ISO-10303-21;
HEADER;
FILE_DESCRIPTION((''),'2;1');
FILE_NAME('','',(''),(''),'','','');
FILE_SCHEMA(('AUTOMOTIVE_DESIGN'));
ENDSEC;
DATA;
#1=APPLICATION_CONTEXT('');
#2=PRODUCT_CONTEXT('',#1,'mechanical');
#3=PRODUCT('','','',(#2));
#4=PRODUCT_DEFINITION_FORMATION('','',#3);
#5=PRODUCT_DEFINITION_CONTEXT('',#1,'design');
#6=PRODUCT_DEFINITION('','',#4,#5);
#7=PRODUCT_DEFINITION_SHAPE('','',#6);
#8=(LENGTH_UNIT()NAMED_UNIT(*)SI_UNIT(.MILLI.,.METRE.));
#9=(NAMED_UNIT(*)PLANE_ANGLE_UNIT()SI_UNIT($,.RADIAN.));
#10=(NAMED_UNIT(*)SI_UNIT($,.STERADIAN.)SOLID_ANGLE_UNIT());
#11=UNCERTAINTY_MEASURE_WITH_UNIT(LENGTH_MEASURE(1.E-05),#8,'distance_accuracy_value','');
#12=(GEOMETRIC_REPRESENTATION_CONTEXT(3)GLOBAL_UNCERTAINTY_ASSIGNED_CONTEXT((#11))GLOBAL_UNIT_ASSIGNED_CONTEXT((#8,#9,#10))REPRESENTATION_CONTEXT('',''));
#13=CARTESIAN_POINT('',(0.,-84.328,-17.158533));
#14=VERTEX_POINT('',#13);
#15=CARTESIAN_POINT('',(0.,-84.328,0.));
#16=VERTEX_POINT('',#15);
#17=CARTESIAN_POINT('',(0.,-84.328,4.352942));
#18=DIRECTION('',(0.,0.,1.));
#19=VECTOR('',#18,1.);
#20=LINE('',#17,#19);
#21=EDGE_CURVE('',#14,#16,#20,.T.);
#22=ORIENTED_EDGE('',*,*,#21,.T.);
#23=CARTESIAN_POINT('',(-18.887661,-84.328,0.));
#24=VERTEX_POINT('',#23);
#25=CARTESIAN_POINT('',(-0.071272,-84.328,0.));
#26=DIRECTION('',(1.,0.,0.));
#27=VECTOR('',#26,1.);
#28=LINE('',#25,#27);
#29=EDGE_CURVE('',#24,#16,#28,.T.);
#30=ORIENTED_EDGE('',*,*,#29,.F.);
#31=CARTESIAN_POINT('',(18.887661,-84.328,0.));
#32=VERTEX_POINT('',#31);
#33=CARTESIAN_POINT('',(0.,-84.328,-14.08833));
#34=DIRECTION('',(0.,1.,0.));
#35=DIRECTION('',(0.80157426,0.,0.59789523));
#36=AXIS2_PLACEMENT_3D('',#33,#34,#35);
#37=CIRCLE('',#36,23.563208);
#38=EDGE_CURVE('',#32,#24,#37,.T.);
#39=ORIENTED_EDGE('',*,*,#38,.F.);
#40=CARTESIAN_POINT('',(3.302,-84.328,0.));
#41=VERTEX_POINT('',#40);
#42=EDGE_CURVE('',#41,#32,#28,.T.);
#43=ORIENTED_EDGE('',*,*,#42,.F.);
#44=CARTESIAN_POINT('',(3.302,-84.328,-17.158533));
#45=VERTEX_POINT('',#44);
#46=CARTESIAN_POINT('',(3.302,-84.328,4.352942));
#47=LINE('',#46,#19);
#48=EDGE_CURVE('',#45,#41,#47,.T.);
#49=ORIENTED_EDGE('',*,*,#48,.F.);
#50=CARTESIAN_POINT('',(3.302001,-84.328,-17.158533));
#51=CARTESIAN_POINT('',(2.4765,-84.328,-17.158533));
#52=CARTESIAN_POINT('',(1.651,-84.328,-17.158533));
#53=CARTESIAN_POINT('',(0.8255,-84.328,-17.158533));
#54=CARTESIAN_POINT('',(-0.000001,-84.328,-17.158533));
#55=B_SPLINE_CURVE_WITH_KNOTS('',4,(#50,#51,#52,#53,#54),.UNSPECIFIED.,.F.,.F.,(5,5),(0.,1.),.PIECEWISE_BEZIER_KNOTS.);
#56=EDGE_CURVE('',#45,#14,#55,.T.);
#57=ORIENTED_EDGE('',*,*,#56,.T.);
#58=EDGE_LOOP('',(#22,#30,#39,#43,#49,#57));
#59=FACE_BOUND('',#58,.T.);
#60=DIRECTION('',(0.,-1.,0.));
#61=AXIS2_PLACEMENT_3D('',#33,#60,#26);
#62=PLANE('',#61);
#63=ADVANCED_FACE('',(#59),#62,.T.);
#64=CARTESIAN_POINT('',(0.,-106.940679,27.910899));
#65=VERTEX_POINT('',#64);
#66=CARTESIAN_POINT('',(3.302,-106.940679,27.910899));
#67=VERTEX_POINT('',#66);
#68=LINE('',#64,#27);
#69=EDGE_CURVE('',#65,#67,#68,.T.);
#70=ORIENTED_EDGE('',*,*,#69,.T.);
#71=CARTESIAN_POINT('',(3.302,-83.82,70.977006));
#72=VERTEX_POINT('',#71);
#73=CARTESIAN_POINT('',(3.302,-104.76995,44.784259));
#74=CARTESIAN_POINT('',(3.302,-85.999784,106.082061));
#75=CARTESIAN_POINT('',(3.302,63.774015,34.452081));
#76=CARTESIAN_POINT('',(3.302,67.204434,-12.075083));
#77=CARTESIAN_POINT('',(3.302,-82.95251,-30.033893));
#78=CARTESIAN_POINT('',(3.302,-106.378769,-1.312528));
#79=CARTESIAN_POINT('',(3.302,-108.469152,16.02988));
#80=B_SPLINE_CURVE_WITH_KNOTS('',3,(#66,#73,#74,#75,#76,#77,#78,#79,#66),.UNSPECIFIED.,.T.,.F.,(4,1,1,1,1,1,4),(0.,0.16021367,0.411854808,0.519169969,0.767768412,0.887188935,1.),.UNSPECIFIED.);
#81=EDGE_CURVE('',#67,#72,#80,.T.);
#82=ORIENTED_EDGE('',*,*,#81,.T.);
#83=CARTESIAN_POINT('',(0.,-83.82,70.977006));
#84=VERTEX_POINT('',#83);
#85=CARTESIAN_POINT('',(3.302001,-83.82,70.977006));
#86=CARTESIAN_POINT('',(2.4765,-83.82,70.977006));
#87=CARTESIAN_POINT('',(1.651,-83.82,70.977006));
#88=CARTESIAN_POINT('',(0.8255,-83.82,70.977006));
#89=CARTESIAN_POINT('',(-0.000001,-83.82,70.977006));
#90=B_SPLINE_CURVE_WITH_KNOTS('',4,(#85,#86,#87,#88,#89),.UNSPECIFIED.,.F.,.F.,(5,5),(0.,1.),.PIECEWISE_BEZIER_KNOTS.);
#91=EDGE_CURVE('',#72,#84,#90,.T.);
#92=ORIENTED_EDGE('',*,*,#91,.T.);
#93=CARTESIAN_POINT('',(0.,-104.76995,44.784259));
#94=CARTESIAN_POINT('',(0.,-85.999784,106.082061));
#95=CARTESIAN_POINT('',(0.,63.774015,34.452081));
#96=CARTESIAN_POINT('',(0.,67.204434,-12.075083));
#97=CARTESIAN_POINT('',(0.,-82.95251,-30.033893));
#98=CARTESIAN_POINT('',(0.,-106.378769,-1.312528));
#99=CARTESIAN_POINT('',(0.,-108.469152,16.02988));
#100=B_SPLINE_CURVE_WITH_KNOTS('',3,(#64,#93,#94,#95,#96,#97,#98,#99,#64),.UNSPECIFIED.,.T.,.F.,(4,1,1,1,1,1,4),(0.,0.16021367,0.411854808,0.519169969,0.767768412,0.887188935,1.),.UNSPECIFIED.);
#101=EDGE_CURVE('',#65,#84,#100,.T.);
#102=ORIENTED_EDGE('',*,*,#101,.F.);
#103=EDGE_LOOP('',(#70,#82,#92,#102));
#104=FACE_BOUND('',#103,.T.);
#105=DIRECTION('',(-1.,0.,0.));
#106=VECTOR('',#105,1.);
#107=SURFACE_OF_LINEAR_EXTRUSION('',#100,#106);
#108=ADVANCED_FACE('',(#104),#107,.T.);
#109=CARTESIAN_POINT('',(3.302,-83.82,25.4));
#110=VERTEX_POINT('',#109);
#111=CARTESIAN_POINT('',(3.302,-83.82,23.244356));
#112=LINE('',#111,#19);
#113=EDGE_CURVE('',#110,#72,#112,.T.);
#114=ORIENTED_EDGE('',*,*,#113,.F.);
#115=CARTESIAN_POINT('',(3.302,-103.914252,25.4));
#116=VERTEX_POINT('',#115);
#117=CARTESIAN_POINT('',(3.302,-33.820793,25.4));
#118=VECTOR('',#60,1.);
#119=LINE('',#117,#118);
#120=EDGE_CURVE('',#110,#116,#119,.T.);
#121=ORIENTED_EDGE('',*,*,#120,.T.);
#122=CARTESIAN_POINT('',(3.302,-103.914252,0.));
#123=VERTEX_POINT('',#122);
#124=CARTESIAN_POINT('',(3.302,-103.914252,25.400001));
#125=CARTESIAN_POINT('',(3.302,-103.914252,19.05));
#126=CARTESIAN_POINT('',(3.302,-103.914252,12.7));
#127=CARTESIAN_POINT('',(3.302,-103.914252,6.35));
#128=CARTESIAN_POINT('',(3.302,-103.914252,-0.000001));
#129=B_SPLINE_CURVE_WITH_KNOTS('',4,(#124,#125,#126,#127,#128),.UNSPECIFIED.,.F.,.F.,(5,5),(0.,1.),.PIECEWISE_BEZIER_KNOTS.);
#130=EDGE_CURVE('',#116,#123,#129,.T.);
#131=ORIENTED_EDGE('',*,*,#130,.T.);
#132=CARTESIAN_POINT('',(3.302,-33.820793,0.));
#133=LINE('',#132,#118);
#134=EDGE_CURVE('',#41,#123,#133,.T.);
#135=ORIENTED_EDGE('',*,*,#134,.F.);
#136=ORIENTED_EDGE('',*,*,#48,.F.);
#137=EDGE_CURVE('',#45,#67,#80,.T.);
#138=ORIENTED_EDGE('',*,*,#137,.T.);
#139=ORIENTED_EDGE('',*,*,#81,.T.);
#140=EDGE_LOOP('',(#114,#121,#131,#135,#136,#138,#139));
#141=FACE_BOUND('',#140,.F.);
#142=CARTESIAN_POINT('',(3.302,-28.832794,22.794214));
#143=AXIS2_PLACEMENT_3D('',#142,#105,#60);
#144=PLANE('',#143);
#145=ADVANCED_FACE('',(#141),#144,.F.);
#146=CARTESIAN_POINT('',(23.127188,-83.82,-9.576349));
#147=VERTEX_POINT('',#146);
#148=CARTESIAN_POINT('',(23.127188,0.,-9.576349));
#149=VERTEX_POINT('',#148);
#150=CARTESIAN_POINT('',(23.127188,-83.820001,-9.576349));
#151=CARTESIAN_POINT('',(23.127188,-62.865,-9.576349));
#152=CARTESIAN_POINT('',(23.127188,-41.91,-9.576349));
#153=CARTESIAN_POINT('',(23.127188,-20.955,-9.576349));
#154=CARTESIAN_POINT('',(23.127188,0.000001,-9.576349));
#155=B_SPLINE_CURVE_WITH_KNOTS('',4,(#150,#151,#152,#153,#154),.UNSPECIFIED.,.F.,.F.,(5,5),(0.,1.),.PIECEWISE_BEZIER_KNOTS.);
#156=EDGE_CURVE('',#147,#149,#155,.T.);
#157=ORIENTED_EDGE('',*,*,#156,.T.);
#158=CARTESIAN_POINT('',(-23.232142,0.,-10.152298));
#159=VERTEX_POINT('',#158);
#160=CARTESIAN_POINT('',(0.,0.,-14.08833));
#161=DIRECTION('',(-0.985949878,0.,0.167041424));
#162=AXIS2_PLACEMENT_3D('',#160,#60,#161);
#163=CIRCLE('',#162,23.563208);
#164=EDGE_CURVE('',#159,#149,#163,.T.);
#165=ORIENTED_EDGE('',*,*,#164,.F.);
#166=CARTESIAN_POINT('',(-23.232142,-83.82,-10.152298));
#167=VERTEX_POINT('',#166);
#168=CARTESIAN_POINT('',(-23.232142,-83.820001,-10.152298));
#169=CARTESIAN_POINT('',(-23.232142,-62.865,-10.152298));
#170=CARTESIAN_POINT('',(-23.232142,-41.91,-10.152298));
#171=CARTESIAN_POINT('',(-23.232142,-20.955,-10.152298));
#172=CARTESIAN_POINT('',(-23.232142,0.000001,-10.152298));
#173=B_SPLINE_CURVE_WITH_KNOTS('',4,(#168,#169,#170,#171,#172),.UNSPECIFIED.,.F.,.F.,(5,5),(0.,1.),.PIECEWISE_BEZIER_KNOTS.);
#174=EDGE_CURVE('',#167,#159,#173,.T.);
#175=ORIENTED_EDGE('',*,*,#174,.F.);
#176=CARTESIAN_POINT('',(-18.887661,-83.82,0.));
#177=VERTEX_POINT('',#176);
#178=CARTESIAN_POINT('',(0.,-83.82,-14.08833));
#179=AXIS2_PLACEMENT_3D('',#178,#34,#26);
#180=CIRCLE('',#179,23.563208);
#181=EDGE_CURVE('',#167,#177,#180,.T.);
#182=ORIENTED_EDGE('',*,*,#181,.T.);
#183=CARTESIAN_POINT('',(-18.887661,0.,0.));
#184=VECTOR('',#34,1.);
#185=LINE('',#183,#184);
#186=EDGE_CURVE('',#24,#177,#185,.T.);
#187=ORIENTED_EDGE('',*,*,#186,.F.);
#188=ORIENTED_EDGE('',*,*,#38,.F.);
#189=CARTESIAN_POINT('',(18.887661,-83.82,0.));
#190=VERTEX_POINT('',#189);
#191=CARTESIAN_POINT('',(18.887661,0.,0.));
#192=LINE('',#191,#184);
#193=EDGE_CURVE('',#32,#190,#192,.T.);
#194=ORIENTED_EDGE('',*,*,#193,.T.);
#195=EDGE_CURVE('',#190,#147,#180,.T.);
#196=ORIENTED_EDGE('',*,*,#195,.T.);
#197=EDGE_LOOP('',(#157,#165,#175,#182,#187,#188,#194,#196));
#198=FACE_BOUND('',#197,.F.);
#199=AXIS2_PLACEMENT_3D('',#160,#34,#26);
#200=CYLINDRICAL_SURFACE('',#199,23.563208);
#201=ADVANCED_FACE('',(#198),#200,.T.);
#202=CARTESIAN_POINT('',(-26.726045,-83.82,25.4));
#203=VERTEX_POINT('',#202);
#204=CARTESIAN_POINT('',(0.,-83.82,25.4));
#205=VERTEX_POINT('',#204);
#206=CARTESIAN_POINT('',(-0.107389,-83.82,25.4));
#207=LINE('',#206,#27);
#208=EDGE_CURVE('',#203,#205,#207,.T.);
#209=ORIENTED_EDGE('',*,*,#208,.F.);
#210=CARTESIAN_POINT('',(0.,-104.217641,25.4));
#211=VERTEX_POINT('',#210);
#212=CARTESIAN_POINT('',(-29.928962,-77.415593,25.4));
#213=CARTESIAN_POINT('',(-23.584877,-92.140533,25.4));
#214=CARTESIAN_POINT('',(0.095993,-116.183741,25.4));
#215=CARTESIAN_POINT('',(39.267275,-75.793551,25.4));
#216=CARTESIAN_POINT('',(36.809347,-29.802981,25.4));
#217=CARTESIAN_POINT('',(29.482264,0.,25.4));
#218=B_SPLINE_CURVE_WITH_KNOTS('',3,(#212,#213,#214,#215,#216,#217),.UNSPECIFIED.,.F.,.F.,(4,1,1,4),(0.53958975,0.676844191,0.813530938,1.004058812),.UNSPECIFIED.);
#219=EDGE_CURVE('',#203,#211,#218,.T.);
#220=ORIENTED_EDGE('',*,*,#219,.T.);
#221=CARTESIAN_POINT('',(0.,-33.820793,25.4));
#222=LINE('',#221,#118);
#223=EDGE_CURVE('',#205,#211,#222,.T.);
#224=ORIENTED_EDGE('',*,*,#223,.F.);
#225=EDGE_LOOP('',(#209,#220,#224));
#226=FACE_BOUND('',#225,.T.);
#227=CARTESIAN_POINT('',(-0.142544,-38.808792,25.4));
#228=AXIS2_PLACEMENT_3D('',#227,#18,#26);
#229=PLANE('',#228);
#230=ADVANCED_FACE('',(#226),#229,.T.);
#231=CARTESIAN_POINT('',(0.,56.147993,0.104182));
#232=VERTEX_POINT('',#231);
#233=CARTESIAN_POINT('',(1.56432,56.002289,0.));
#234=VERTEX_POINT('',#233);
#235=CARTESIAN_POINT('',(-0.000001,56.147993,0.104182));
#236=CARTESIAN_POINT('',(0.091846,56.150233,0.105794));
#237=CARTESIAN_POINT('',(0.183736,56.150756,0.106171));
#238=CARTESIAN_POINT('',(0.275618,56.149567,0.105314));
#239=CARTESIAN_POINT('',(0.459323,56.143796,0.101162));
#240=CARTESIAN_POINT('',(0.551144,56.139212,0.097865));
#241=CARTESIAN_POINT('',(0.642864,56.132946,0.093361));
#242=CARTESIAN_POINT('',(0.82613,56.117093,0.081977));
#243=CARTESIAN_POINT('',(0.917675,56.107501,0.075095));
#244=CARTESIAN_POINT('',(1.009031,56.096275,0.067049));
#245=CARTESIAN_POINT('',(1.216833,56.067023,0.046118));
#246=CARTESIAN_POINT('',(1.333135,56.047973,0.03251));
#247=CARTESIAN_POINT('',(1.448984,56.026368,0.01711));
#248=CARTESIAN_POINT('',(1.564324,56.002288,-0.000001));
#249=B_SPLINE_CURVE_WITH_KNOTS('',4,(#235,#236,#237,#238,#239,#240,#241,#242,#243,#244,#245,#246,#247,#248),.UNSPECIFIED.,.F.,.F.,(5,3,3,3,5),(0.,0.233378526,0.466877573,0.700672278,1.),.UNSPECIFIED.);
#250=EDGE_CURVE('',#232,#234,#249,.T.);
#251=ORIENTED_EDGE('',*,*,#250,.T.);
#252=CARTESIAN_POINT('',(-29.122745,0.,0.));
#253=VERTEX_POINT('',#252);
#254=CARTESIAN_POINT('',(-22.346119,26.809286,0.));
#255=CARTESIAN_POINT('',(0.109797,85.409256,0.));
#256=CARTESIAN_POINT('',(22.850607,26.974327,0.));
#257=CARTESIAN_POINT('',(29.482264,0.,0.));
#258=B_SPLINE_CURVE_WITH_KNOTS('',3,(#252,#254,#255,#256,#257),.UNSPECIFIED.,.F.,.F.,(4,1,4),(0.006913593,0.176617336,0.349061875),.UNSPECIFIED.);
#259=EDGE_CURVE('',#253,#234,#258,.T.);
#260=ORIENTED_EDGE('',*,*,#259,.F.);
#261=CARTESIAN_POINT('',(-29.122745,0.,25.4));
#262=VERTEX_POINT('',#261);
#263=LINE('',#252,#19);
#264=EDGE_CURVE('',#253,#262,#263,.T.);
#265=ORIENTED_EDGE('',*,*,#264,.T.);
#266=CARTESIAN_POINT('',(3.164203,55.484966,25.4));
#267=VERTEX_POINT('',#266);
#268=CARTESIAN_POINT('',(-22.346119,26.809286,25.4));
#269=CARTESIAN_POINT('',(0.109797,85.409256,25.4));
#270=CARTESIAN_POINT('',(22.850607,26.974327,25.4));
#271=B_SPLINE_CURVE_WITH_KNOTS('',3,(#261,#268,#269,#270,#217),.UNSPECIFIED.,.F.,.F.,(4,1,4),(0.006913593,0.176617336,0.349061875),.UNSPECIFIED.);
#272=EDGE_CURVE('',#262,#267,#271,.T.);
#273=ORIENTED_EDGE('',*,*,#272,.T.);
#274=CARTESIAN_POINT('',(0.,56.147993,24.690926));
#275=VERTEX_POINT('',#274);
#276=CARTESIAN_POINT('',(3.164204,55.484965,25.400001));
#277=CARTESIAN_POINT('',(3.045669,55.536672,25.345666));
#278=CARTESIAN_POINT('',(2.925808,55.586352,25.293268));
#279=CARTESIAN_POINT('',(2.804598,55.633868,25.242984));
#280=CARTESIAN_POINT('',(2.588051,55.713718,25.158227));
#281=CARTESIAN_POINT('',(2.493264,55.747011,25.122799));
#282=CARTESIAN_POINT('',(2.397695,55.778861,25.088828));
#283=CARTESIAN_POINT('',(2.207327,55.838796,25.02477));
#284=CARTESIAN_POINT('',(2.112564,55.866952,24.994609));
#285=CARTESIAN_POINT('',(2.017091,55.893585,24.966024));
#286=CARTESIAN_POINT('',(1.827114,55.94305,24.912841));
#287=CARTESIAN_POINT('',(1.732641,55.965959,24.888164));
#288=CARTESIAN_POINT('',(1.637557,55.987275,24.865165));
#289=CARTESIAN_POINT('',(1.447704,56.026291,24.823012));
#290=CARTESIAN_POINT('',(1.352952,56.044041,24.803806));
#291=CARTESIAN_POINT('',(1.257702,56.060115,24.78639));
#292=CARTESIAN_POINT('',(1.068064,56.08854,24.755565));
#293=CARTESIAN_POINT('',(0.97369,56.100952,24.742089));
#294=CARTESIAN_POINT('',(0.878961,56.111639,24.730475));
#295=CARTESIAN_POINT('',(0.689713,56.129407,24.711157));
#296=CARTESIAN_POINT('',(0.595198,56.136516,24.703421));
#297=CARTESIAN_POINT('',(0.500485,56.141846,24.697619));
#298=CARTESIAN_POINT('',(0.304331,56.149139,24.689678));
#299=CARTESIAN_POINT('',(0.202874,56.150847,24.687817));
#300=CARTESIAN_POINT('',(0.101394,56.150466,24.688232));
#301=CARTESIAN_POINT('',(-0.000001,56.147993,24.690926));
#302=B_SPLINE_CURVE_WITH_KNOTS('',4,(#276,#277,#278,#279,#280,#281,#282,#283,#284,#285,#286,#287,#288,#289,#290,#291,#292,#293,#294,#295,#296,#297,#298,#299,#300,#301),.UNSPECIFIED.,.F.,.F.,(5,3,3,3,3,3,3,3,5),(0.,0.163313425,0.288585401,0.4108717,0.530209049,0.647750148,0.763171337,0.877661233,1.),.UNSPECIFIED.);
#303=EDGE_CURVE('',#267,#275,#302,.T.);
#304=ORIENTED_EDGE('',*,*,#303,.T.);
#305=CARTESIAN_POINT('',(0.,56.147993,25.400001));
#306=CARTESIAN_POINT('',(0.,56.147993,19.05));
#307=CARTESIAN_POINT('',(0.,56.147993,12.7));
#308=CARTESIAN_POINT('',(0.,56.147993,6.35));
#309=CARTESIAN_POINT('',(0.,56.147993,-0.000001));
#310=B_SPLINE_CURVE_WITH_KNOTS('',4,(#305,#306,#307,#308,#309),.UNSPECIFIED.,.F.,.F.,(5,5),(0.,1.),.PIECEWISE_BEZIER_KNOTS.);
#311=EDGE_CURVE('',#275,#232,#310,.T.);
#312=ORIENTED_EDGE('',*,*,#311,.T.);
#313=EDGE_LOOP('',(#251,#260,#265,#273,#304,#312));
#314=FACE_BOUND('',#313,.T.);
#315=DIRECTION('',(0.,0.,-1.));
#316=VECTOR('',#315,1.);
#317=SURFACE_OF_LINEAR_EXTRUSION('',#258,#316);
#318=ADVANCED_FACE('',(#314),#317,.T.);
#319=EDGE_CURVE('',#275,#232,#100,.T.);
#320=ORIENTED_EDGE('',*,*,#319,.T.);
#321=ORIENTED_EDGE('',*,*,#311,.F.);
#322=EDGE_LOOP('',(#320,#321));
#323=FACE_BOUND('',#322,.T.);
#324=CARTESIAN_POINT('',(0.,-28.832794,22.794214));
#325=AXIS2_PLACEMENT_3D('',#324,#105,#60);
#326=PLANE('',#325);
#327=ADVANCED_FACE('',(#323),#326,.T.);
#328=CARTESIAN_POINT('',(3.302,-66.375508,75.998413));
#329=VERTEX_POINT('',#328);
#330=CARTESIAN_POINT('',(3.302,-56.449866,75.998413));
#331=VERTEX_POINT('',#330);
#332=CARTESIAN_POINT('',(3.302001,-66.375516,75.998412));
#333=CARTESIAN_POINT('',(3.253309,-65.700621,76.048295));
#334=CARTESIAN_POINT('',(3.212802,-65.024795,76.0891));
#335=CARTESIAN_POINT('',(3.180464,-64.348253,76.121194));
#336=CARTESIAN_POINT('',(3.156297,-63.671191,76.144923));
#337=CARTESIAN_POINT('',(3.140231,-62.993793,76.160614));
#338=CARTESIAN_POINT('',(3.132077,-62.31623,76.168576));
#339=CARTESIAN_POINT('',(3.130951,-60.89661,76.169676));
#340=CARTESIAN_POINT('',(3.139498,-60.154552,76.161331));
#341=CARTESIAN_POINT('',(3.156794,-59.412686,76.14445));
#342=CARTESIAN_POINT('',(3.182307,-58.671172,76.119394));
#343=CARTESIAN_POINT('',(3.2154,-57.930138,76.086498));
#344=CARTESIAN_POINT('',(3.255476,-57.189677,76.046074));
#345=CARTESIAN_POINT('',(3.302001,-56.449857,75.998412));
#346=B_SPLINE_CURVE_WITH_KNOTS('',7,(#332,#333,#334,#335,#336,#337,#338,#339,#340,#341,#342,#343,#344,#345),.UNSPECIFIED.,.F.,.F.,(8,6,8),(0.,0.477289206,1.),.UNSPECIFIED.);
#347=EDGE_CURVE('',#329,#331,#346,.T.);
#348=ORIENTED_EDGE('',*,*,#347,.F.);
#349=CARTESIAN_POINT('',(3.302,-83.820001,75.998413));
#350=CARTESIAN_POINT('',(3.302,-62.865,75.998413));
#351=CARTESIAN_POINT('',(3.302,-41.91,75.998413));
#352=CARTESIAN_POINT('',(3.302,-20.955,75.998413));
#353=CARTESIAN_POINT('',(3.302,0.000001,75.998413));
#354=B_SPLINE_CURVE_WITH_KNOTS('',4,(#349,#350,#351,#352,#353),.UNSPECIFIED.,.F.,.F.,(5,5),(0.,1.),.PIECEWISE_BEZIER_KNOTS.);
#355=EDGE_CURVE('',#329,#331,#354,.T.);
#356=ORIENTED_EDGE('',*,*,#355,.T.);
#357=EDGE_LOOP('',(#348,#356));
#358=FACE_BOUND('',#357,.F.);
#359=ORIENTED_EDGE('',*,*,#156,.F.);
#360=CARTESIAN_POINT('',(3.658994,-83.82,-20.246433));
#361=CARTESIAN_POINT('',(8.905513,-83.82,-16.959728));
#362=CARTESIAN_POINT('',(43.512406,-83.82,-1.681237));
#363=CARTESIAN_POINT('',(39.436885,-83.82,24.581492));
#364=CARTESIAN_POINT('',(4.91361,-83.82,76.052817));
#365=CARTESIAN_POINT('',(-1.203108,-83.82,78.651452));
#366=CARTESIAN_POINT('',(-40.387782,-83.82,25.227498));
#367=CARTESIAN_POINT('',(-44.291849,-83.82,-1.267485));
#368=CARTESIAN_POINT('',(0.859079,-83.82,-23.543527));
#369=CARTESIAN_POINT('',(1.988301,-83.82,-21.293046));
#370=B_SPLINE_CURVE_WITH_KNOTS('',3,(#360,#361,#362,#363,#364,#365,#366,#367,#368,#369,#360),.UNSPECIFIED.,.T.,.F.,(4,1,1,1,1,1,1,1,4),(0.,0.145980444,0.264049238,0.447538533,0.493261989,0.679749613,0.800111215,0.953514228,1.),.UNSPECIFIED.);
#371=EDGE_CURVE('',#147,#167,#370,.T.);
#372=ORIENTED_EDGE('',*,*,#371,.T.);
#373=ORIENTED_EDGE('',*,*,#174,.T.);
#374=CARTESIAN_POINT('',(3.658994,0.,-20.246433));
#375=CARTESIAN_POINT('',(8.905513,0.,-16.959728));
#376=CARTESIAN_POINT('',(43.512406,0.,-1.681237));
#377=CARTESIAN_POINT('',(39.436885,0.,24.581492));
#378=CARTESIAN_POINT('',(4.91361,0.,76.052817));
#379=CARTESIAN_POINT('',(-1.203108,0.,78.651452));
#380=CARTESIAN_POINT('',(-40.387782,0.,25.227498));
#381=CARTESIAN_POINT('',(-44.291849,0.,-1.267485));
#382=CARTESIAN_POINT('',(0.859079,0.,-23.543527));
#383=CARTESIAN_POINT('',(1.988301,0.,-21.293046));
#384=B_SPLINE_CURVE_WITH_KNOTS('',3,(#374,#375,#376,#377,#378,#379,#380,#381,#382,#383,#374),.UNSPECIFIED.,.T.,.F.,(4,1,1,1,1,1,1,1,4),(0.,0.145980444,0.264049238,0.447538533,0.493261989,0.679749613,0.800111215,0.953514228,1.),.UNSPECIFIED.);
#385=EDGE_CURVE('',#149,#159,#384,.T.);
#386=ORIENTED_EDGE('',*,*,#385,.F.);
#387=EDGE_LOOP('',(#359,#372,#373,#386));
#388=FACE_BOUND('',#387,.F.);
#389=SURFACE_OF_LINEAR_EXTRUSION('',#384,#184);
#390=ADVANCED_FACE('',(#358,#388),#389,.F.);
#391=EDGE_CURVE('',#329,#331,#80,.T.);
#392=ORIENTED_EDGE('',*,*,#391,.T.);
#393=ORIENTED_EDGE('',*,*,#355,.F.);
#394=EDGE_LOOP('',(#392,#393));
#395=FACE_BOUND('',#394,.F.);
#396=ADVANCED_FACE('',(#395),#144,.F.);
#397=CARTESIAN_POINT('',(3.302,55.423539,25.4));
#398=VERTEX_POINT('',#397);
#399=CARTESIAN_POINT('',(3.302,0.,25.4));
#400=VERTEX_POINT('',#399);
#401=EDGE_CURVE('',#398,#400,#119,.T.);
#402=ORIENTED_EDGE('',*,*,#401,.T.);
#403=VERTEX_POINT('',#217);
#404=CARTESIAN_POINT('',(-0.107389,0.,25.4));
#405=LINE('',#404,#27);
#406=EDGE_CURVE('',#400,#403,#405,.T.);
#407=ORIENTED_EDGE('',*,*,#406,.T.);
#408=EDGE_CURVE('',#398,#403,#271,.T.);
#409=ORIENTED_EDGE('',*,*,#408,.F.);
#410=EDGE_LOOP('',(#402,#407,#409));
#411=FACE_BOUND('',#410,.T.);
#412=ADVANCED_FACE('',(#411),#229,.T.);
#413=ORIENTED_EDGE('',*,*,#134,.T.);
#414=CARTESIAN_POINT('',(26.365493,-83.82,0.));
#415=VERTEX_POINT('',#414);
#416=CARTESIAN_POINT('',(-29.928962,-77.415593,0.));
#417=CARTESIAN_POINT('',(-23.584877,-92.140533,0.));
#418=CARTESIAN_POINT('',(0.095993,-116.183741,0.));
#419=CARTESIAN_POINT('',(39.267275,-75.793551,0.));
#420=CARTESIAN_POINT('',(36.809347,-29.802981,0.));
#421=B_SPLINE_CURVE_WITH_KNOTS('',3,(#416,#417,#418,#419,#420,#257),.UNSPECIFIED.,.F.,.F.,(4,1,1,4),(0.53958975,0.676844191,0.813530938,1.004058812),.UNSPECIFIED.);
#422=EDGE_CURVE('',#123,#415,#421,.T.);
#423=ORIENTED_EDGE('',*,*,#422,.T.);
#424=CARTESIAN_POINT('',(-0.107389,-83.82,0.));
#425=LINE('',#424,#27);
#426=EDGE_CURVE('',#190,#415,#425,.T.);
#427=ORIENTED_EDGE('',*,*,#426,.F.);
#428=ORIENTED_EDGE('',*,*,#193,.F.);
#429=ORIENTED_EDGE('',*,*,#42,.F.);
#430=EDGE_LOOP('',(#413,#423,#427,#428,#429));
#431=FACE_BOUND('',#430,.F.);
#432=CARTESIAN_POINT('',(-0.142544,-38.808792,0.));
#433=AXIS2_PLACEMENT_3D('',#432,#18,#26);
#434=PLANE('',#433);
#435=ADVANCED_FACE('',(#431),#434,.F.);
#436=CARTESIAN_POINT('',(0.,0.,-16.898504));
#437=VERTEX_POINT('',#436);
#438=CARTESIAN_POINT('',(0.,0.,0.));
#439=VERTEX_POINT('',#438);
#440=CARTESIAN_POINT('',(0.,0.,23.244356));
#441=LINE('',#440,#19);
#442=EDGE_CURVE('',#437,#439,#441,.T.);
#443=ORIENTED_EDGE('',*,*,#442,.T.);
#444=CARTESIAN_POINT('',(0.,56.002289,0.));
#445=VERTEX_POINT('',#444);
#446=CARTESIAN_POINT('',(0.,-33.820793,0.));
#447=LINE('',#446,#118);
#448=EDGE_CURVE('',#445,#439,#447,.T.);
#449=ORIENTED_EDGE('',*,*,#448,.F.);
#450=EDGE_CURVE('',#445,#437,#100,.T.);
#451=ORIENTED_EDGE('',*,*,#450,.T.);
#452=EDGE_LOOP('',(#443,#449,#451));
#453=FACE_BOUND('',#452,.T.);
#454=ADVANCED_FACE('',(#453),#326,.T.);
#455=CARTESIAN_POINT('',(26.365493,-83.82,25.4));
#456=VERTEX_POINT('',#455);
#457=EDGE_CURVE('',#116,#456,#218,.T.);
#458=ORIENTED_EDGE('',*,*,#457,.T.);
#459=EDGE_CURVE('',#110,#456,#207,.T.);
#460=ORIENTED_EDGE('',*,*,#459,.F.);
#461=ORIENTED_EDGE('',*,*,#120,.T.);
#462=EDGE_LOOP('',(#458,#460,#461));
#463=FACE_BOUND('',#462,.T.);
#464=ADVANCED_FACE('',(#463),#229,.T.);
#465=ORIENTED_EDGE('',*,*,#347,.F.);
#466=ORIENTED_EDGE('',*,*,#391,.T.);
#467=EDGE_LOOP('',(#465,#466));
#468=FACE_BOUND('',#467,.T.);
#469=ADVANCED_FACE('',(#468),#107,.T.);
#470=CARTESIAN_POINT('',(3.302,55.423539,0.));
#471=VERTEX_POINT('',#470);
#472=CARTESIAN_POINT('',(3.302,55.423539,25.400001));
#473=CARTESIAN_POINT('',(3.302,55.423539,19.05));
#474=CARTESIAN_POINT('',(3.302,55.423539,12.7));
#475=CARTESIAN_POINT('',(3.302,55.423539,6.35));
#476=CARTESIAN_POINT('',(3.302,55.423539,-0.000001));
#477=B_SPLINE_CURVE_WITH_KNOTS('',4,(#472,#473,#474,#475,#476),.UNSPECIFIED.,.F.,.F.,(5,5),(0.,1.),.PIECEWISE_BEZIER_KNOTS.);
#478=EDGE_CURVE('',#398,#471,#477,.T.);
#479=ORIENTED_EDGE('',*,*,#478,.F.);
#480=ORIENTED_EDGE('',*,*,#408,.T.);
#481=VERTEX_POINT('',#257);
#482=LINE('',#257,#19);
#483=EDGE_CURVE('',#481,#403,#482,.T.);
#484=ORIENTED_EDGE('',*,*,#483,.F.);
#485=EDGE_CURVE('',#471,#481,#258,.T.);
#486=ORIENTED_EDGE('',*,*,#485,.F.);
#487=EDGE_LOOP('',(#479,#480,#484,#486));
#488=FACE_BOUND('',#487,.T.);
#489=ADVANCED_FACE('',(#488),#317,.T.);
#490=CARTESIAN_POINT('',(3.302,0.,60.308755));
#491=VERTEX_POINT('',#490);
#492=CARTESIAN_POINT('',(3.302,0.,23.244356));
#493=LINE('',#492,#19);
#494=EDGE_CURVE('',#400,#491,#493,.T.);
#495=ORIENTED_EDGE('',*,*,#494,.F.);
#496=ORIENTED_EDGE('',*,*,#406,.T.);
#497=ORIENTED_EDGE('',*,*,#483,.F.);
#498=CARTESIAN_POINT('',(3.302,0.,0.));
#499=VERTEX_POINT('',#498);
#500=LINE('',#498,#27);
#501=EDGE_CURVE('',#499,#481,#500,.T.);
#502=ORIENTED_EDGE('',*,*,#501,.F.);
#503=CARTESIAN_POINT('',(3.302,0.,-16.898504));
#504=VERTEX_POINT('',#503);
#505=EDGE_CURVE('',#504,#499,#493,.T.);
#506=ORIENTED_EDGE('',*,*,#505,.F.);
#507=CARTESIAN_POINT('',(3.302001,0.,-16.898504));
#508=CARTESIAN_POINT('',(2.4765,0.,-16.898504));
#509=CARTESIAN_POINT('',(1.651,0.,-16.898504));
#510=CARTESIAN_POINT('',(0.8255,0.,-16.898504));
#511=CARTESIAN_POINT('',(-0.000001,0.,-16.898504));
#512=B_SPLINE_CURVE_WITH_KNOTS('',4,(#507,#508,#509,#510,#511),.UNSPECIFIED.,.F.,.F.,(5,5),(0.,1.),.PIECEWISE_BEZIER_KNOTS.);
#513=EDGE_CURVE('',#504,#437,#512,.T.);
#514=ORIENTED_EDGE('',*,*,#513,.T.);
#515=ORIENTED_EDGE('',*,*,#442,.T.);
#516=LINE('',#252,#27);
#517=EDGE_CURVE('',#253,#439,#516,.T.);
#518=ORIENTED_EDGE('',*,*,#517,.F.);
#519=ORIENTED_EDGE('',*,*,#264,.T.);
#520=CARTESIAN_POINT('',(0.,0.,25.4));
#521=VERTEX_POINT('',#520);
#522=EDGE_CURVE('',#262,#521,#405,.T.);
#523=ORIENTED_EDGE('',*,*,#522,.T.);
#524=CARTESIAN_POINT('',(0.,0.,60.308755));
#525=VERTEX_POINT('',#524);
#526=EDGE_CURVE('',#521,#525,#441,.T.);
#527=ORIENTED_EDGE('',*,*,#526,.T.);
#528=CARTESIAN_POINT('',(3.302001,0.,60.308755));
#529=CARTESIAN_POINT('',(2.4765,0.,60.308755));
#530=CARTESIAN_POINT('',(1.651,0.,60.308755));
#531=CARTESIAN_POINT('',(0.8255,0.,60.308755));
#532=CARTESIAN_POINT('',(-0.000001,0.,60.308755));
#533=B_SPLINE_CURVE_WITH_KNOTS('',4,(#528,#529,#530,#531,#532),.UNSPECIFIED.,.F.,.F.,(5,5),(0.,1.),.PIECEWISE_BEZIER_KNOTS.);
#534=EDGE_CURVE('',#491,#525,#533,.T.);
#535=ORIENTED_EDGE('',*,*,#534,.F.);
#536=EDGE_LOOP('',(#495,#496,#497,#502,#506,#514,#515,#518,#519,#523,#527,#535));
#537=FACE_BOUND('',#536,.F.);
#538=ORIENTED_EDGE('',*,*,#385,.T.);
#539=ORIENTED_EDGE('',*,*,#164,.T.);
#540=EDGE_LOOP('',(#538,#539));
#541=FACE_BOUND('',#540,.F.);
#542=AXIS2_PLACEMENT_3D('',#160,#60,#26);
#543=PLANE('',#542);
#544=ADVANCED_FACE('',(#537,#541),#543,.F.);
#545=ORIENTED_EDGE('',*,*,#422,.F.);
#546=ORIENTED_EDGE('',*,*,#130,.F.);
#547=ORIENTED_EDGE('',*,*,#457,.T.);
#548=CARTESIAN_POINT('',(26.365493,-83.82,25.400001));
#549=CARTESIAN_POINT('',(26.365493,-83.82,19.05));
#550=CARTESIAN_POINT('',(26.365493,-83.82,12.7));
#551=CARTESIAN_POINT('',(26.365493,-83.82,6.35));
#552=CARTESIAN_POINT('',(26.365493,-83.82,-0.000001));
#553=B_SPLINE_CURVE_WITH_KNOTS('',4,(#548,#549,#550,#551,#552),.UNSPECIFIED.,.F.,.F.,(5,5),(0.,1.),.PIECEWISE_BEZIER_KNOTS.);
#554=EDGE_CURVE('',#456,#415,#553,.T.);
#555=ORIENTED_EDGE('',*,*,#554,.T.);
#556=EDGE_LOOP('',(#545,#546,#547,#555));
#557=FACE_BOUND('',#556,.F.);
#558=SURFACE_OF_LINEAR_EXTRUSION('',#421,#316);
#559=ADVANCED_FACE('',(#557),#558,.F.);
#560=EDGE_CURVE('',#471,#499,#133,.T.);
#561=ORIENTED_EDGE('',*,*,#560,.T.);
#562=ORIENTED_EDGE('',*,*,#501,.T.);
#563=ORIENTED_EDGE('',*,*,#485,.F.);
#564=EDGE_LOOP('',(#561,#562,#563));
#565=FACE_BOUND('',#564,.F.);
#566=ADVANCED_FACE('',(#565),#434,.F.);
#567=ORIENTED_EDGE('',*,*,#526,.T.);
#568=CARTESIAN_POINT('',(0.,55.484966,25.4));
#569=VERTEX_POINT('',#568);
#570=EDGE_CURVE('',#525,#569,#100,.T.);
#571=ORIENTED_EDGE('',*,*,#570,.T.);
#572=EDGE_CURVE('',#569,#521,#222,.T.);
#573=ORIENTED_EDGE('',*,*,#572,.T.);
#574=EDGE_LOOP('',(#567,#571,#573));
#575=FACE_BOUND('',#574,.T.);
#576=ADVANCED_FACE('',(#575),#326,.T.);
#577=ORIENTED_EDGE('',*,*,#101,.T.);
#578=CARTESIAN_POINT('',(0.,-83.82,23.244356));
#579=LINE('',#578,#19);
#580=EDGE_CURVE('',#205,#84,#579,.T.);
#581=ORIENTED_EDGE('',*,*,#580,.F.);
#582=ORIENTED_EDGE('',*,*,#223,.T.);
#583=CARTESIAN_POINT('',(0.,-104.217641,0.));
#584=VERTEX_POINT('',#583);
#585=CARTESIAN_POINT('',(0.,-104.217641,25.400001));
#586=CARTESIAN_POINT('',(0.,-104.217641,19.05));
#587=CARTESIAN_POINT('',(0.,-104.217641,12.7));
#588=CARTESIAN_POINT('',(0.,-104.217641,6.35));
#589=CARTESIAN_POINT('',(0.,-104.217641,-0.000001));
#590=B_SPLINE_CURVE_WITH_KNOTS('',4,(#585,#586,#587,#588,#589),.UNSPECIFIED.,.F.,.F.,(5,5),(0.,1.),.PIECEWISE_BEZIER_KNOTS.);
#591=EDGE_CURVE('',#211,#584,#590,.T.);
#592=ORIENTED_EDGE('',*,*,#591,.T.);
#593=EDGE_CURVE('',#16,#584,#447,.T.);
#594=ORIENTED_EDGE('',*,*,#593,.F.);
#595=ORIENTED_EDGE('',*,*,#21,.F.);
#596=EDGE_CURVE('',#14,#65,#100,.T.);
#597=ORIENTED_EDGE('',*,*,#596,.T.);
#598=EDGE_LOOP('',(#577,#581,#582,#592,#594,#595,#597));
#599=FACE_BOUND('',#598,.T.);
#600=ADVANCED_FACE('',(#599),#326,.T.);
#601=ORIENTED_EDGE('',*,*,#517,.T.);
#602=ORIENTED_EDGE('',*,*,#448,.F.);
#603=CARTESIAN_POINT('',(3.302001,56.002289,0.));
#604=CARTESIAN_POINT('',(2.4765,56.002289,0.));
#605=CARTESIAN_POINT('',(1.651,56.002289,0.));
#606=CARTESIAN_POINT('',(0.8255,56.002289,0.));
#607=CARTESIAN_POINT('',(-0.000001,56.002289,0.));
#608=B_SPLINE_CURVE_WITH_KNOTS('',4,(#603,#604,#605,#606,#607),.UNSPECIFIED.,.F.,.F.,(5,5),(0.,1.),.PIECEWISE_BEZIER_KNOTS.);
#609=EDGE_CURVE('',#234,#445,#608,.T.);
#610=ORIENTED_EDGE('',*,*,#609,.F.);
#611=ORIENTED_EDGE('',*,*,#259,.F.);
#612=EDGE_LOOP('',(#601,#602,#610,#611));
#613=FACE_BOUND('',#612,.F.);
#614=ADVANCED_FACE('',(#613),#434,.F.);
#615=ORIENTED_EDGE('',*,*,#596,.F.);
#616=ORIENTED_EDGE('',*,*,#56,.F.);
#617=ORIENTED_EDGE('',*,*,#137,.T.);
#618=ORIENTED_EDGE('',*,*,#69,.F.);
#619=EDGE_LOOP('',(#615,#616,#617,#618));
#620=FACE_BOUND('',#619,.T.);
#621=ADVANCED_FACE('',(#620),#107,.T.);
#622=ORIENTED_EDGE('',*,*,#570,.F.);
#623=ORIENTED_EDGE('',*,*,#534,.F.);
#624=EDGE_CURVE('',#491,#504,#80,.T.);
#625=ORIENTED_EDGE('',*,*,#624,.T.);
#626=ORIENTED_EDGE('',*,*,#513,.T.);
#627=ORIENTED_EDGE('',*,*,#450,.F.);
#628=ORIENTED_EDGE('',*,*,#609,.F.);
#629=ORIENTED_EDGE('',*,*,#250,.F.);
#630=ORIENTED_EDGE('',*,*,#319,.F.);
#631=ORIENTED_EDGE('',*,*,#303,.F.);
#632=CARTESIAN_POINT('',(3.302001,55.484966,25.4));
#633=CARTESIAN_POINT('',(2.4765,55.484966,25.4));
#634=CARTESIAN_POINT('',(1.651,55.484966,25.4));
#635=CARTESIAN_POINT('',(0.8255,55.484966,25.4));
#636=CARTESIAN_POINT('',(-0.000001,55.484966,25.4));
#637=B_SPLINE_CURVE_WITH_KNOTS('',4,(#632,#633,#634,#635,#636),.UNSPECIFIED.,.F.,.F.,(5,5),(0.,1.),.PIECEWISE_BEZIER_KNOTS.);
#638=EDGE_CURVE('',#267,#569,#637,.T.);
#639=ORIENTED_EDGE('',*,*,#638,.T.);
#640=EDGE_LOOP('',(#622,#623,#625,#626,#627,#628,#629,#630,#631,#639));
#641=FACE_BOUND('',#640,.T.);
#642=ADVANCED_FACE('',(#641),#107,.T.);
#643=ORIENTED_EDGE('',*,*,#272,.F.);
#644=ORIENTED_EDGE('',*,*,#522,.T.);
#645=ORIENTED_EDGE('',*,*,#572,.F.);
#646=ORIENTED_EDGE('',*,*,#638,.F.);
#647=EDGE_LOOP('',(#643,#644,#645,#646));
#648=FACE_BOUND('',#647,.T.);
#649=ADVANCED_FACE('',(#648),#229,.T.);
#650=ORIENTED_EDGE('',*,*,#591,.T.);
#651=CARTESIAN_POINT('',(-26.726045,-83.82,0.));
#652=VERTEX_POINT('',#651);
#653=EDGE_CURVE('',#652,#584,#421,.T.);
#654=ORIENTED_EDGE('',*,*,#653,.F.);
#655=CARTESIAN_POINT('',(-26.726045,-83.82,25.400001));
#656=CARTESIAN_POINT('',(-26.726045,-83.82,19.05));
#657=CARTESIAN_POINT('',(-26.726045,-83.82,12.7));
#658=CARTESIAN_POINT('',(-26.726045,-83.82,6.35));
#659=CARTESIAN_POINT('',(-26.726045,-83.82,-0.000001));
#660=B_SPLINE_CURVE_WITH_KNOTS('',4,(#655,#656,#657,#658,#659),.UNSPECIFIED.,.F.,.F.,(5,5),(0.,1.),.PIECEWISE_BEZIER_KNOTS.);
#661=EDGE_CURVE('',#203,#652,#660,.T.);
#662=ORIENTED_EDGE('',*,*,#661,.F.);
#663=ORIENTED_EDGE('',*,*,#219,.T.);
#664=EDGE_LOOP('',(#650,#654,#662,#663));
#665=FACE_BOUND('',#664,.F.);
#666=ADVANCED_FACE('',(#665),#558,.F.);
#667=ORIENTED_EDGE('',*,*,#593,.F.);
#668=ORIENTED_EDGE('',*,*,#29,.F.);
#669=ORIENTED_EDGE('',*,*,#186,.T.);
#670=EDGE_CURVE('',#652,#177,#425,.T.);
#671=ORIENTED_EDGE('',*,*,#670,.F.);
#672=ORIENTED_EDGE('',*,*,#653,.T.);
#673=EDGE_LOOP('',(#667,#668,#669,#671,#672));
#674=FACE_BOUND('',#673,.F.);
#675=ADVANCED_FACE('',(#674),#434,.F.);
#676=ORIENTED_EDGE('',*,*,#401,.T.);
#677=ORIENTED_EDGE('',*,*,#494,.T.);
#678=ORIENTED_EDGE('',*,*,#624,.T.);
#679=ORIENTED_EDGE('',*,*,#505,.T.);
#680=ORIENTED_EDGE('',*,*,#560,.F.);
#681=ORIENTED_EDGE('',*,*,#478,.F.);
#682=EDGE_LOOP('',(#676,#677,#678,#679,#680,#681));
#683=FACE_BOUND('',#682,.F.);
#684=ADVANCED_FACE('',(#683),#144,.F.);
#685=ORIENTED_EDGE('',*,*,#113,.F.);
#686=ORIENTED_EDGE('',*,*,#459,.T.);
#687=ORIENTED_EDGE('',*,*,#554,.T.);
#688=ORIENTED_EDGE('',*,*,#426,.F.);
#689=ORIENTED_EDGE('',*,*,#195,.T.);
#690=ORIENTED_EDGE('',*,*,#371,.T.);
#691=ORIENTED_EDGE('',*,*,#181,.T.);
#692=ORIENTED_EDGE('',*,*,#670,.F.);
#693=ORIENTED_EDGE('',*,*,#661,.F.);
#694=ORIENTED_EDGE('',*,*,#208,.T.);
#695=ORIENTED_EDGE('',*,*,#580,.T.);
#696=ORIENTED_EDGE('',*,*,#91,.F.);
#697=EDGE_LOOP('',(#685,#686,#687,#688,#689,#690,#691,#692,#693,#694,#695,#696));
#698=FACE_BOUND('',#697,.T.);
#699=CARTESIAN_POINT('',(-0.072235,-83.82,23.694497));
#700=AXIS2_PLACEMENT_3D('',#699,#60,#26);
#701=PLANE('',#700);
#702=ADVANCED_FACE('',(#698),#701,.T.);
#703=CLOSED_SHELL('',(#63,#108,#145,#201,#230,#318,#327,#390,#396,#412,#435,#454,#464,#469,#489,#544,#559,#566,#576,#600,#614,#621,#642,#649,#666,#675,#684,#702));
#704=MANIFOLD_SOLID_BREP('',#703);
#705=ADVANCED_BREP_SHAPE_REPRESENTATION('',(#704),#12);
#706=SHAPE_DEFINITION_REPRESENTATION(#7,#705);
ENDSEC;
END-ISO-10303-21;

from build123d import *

# Parameters (mm, degrees)
F1_DEPTH = 25.4
F5_DEPTH = 3.302
F6_DEPTH = 83.82
F4_R     = 23.5632083166
F7_DEPTH = 84.328


# Not quite as in the source:
# - the program builds the solid bodies; features that only make, move or delete a surface that nothing else refers to are left out


with BuildPart() as f1:
    # F0 (on Top) → F1 (new body)
    with BuildSketch(Plane.XY):
        with BuildLine():
            Line((29.4822640717, -77.4155929685), (29.4822640717, 0))
            Line((29.4822640717, 0), (-29.1227447429, 0))
            add(Edge.make_bspline(
                [(-29.9289617687, -3.2632336952), (-29.667654713, -2.1806328695), (-29.3988189869, -1.0921885475), (-29.1227447429, 0)],
                knots=[0, 0, 0, 0, 0.0069135928, 0.0069135928, 0.0069135928, 0.0069135928], degree=3))
            Line((-29.9289617687, -3.2632336952), (-29.9289617687, -77.4155929685))
            Line((-29.9289617687, -77.4155929685), (29.4822640717, -77.4155929685))
        make_face()
        with BuildLine():
            add(Edge.make_bspline(
                [(29.4822640717, 0), (36.8093470661, -29.8029805077), (38.2405293985, -56.581996996), (29.4822640717, -77.4155929685)],
                knots=[0.3490618748, 0.3490618748, 0.3490618748, 0.3490618748, 0.5395897495, 0.5395897495, 0.5395897495, 0.5395897495], degree=3))
            Line((29.4822640717, 0), (29.4822640717, -77.4155929685))
        make_face()
        with BuildLine():
            Line((-29.1227447429, 0), (29.4822640717, 0))
            add(Edge.make_bspline(
                [(-29.1227447429, 0), (-22.3461187558, 26.8092857377), (0.1097970289, 85.4092558598), (22.8506074317, 26.9743271269), (29.4822640717, 0)],
                knots=[0.0069135928, 0.0069135928, 0.0069135928, 0.0069135928, 0.1766173363, 0.3490618748, 0.3490618748, 0.3490618748, 0.3490618748], degree=3))
        make_face()
        with BuildLine():
            add(Edge.make_bspline(
                [(-29.9289617687, -3.2632336952), (-29.667654713, -2.1806328695), (-29.3988189869, -1.0921885475), (-29.1227447429, 0)],
                knots=[0, 0, 0, 0, 0.0069135928, 0.0069135928, 0.0069135928, 0.0069135928], degree=3))
            Line((-29.1227447429, 0), (-29.9289617687, 0))
            Line((-29.9289617687, 0), (-29.9289617687, -3.2632336952))
        make_face()
        with BuildLine():
            add(Edge.make_bspline(
                [(29.4822640717, -77.4155929685), (23.1989903439, -92.3618387541), (0.0959929876, -116.1837405568), (-23.5848767505, -92.1405326762), (-29.9289617687, -77.4155929685)],
                knots=[0.5395897495, 0.5395897495, 0.5395897495, 0.5395897495, 0.6762764957, 0.8135309375, 0.8135309375, 0.8135309375, 0.8135309375], degree=3))
            Line((29.4822640717, -77.4155929685), (-29.9289617687, -77.4155929685))
        make_face()
        with BuildLine():
            Line((-29.9289617687, -77.4155929685), (-29.9289617687, -3.2632336952))
            add(Edge.make_bspline(
                [(-29.9289617687, -77.4155929685), (-38.5478127899, -57.410807208), (-36.9767707788, -32.462459996), (-29.9289617687, -3.2632336952)],
                knots=[0.8135309375, 0.8135309375, 0.8135309375, 0.8135309375, 1, 1, 1, 1], degree=3))
        make_face()
    extrude(amount=F1_DEPTH)

    # F2 (on Right) → F5 (join)
    with BuildSketch(Plane.YZ):
        with BuildLine():
            add(Edge.make_bspline(
                [(-106.9406792521, 27.9108993709), (-104.7699498582, 44.7842591168), (-85.999784023, 106.0820605098), (63.7740149004, 34.4520809419), (67.2044335068, -12.0750834044), (-82.9525104958, -30.0338929898), (-106.3787685917, -1.3125281144), (-108.4691524114, 16.029880231), (-106.9406792521, 27.9108993709)],
                knots=[0, 0, 0, 0, 0.1602136705, 0.4118548084, 0.5191699694, 0.7677684124, 0.8871889349, 1, 1, 1, 1], degree=3))
        make_face()
    extrude(amount=F5_DEPTH)

    # F3 (on Front) → F6 (join)
    with BuildSketch(Plane.XZ):
        with BuildLine():
            add(Edge.make_bspline(
                [(3.6589938682, -20.2464330941), (8.9055125534, -16.9597283327), (43.5124058761, -1.6812370703), (39.4368848502, 24.5814924516), (4.9136096926, 76.052816503), (-1.2031084613, 78.6514524427), (-40.3877816165, 25.2274980043), (-44.2918485042, -1.2674845253), (0.8590787196, -23.543526647), (1.9883011107, -21.2930459379), (3.6589938682, -20.2464330941)],
                knots=[0, 0, 0, 0, 0.1459804442, 0.2640492381, 0.4475385331, 0.4932619887, 0.6797496131, 0.8001112146, 0.9535142281, 1, 1, 1, 1], degree=3))
        make_face()
    extrude(amount=F6_DEPTH)

    # F4 (on Front) → F7 (join)
    with BuildSketch(Plane.XZ):
        with Locations((0, -14.0883298591)):
            Circle(F4_R)
    extrude(amount=F7_DEPTH)


solid = f1.part
